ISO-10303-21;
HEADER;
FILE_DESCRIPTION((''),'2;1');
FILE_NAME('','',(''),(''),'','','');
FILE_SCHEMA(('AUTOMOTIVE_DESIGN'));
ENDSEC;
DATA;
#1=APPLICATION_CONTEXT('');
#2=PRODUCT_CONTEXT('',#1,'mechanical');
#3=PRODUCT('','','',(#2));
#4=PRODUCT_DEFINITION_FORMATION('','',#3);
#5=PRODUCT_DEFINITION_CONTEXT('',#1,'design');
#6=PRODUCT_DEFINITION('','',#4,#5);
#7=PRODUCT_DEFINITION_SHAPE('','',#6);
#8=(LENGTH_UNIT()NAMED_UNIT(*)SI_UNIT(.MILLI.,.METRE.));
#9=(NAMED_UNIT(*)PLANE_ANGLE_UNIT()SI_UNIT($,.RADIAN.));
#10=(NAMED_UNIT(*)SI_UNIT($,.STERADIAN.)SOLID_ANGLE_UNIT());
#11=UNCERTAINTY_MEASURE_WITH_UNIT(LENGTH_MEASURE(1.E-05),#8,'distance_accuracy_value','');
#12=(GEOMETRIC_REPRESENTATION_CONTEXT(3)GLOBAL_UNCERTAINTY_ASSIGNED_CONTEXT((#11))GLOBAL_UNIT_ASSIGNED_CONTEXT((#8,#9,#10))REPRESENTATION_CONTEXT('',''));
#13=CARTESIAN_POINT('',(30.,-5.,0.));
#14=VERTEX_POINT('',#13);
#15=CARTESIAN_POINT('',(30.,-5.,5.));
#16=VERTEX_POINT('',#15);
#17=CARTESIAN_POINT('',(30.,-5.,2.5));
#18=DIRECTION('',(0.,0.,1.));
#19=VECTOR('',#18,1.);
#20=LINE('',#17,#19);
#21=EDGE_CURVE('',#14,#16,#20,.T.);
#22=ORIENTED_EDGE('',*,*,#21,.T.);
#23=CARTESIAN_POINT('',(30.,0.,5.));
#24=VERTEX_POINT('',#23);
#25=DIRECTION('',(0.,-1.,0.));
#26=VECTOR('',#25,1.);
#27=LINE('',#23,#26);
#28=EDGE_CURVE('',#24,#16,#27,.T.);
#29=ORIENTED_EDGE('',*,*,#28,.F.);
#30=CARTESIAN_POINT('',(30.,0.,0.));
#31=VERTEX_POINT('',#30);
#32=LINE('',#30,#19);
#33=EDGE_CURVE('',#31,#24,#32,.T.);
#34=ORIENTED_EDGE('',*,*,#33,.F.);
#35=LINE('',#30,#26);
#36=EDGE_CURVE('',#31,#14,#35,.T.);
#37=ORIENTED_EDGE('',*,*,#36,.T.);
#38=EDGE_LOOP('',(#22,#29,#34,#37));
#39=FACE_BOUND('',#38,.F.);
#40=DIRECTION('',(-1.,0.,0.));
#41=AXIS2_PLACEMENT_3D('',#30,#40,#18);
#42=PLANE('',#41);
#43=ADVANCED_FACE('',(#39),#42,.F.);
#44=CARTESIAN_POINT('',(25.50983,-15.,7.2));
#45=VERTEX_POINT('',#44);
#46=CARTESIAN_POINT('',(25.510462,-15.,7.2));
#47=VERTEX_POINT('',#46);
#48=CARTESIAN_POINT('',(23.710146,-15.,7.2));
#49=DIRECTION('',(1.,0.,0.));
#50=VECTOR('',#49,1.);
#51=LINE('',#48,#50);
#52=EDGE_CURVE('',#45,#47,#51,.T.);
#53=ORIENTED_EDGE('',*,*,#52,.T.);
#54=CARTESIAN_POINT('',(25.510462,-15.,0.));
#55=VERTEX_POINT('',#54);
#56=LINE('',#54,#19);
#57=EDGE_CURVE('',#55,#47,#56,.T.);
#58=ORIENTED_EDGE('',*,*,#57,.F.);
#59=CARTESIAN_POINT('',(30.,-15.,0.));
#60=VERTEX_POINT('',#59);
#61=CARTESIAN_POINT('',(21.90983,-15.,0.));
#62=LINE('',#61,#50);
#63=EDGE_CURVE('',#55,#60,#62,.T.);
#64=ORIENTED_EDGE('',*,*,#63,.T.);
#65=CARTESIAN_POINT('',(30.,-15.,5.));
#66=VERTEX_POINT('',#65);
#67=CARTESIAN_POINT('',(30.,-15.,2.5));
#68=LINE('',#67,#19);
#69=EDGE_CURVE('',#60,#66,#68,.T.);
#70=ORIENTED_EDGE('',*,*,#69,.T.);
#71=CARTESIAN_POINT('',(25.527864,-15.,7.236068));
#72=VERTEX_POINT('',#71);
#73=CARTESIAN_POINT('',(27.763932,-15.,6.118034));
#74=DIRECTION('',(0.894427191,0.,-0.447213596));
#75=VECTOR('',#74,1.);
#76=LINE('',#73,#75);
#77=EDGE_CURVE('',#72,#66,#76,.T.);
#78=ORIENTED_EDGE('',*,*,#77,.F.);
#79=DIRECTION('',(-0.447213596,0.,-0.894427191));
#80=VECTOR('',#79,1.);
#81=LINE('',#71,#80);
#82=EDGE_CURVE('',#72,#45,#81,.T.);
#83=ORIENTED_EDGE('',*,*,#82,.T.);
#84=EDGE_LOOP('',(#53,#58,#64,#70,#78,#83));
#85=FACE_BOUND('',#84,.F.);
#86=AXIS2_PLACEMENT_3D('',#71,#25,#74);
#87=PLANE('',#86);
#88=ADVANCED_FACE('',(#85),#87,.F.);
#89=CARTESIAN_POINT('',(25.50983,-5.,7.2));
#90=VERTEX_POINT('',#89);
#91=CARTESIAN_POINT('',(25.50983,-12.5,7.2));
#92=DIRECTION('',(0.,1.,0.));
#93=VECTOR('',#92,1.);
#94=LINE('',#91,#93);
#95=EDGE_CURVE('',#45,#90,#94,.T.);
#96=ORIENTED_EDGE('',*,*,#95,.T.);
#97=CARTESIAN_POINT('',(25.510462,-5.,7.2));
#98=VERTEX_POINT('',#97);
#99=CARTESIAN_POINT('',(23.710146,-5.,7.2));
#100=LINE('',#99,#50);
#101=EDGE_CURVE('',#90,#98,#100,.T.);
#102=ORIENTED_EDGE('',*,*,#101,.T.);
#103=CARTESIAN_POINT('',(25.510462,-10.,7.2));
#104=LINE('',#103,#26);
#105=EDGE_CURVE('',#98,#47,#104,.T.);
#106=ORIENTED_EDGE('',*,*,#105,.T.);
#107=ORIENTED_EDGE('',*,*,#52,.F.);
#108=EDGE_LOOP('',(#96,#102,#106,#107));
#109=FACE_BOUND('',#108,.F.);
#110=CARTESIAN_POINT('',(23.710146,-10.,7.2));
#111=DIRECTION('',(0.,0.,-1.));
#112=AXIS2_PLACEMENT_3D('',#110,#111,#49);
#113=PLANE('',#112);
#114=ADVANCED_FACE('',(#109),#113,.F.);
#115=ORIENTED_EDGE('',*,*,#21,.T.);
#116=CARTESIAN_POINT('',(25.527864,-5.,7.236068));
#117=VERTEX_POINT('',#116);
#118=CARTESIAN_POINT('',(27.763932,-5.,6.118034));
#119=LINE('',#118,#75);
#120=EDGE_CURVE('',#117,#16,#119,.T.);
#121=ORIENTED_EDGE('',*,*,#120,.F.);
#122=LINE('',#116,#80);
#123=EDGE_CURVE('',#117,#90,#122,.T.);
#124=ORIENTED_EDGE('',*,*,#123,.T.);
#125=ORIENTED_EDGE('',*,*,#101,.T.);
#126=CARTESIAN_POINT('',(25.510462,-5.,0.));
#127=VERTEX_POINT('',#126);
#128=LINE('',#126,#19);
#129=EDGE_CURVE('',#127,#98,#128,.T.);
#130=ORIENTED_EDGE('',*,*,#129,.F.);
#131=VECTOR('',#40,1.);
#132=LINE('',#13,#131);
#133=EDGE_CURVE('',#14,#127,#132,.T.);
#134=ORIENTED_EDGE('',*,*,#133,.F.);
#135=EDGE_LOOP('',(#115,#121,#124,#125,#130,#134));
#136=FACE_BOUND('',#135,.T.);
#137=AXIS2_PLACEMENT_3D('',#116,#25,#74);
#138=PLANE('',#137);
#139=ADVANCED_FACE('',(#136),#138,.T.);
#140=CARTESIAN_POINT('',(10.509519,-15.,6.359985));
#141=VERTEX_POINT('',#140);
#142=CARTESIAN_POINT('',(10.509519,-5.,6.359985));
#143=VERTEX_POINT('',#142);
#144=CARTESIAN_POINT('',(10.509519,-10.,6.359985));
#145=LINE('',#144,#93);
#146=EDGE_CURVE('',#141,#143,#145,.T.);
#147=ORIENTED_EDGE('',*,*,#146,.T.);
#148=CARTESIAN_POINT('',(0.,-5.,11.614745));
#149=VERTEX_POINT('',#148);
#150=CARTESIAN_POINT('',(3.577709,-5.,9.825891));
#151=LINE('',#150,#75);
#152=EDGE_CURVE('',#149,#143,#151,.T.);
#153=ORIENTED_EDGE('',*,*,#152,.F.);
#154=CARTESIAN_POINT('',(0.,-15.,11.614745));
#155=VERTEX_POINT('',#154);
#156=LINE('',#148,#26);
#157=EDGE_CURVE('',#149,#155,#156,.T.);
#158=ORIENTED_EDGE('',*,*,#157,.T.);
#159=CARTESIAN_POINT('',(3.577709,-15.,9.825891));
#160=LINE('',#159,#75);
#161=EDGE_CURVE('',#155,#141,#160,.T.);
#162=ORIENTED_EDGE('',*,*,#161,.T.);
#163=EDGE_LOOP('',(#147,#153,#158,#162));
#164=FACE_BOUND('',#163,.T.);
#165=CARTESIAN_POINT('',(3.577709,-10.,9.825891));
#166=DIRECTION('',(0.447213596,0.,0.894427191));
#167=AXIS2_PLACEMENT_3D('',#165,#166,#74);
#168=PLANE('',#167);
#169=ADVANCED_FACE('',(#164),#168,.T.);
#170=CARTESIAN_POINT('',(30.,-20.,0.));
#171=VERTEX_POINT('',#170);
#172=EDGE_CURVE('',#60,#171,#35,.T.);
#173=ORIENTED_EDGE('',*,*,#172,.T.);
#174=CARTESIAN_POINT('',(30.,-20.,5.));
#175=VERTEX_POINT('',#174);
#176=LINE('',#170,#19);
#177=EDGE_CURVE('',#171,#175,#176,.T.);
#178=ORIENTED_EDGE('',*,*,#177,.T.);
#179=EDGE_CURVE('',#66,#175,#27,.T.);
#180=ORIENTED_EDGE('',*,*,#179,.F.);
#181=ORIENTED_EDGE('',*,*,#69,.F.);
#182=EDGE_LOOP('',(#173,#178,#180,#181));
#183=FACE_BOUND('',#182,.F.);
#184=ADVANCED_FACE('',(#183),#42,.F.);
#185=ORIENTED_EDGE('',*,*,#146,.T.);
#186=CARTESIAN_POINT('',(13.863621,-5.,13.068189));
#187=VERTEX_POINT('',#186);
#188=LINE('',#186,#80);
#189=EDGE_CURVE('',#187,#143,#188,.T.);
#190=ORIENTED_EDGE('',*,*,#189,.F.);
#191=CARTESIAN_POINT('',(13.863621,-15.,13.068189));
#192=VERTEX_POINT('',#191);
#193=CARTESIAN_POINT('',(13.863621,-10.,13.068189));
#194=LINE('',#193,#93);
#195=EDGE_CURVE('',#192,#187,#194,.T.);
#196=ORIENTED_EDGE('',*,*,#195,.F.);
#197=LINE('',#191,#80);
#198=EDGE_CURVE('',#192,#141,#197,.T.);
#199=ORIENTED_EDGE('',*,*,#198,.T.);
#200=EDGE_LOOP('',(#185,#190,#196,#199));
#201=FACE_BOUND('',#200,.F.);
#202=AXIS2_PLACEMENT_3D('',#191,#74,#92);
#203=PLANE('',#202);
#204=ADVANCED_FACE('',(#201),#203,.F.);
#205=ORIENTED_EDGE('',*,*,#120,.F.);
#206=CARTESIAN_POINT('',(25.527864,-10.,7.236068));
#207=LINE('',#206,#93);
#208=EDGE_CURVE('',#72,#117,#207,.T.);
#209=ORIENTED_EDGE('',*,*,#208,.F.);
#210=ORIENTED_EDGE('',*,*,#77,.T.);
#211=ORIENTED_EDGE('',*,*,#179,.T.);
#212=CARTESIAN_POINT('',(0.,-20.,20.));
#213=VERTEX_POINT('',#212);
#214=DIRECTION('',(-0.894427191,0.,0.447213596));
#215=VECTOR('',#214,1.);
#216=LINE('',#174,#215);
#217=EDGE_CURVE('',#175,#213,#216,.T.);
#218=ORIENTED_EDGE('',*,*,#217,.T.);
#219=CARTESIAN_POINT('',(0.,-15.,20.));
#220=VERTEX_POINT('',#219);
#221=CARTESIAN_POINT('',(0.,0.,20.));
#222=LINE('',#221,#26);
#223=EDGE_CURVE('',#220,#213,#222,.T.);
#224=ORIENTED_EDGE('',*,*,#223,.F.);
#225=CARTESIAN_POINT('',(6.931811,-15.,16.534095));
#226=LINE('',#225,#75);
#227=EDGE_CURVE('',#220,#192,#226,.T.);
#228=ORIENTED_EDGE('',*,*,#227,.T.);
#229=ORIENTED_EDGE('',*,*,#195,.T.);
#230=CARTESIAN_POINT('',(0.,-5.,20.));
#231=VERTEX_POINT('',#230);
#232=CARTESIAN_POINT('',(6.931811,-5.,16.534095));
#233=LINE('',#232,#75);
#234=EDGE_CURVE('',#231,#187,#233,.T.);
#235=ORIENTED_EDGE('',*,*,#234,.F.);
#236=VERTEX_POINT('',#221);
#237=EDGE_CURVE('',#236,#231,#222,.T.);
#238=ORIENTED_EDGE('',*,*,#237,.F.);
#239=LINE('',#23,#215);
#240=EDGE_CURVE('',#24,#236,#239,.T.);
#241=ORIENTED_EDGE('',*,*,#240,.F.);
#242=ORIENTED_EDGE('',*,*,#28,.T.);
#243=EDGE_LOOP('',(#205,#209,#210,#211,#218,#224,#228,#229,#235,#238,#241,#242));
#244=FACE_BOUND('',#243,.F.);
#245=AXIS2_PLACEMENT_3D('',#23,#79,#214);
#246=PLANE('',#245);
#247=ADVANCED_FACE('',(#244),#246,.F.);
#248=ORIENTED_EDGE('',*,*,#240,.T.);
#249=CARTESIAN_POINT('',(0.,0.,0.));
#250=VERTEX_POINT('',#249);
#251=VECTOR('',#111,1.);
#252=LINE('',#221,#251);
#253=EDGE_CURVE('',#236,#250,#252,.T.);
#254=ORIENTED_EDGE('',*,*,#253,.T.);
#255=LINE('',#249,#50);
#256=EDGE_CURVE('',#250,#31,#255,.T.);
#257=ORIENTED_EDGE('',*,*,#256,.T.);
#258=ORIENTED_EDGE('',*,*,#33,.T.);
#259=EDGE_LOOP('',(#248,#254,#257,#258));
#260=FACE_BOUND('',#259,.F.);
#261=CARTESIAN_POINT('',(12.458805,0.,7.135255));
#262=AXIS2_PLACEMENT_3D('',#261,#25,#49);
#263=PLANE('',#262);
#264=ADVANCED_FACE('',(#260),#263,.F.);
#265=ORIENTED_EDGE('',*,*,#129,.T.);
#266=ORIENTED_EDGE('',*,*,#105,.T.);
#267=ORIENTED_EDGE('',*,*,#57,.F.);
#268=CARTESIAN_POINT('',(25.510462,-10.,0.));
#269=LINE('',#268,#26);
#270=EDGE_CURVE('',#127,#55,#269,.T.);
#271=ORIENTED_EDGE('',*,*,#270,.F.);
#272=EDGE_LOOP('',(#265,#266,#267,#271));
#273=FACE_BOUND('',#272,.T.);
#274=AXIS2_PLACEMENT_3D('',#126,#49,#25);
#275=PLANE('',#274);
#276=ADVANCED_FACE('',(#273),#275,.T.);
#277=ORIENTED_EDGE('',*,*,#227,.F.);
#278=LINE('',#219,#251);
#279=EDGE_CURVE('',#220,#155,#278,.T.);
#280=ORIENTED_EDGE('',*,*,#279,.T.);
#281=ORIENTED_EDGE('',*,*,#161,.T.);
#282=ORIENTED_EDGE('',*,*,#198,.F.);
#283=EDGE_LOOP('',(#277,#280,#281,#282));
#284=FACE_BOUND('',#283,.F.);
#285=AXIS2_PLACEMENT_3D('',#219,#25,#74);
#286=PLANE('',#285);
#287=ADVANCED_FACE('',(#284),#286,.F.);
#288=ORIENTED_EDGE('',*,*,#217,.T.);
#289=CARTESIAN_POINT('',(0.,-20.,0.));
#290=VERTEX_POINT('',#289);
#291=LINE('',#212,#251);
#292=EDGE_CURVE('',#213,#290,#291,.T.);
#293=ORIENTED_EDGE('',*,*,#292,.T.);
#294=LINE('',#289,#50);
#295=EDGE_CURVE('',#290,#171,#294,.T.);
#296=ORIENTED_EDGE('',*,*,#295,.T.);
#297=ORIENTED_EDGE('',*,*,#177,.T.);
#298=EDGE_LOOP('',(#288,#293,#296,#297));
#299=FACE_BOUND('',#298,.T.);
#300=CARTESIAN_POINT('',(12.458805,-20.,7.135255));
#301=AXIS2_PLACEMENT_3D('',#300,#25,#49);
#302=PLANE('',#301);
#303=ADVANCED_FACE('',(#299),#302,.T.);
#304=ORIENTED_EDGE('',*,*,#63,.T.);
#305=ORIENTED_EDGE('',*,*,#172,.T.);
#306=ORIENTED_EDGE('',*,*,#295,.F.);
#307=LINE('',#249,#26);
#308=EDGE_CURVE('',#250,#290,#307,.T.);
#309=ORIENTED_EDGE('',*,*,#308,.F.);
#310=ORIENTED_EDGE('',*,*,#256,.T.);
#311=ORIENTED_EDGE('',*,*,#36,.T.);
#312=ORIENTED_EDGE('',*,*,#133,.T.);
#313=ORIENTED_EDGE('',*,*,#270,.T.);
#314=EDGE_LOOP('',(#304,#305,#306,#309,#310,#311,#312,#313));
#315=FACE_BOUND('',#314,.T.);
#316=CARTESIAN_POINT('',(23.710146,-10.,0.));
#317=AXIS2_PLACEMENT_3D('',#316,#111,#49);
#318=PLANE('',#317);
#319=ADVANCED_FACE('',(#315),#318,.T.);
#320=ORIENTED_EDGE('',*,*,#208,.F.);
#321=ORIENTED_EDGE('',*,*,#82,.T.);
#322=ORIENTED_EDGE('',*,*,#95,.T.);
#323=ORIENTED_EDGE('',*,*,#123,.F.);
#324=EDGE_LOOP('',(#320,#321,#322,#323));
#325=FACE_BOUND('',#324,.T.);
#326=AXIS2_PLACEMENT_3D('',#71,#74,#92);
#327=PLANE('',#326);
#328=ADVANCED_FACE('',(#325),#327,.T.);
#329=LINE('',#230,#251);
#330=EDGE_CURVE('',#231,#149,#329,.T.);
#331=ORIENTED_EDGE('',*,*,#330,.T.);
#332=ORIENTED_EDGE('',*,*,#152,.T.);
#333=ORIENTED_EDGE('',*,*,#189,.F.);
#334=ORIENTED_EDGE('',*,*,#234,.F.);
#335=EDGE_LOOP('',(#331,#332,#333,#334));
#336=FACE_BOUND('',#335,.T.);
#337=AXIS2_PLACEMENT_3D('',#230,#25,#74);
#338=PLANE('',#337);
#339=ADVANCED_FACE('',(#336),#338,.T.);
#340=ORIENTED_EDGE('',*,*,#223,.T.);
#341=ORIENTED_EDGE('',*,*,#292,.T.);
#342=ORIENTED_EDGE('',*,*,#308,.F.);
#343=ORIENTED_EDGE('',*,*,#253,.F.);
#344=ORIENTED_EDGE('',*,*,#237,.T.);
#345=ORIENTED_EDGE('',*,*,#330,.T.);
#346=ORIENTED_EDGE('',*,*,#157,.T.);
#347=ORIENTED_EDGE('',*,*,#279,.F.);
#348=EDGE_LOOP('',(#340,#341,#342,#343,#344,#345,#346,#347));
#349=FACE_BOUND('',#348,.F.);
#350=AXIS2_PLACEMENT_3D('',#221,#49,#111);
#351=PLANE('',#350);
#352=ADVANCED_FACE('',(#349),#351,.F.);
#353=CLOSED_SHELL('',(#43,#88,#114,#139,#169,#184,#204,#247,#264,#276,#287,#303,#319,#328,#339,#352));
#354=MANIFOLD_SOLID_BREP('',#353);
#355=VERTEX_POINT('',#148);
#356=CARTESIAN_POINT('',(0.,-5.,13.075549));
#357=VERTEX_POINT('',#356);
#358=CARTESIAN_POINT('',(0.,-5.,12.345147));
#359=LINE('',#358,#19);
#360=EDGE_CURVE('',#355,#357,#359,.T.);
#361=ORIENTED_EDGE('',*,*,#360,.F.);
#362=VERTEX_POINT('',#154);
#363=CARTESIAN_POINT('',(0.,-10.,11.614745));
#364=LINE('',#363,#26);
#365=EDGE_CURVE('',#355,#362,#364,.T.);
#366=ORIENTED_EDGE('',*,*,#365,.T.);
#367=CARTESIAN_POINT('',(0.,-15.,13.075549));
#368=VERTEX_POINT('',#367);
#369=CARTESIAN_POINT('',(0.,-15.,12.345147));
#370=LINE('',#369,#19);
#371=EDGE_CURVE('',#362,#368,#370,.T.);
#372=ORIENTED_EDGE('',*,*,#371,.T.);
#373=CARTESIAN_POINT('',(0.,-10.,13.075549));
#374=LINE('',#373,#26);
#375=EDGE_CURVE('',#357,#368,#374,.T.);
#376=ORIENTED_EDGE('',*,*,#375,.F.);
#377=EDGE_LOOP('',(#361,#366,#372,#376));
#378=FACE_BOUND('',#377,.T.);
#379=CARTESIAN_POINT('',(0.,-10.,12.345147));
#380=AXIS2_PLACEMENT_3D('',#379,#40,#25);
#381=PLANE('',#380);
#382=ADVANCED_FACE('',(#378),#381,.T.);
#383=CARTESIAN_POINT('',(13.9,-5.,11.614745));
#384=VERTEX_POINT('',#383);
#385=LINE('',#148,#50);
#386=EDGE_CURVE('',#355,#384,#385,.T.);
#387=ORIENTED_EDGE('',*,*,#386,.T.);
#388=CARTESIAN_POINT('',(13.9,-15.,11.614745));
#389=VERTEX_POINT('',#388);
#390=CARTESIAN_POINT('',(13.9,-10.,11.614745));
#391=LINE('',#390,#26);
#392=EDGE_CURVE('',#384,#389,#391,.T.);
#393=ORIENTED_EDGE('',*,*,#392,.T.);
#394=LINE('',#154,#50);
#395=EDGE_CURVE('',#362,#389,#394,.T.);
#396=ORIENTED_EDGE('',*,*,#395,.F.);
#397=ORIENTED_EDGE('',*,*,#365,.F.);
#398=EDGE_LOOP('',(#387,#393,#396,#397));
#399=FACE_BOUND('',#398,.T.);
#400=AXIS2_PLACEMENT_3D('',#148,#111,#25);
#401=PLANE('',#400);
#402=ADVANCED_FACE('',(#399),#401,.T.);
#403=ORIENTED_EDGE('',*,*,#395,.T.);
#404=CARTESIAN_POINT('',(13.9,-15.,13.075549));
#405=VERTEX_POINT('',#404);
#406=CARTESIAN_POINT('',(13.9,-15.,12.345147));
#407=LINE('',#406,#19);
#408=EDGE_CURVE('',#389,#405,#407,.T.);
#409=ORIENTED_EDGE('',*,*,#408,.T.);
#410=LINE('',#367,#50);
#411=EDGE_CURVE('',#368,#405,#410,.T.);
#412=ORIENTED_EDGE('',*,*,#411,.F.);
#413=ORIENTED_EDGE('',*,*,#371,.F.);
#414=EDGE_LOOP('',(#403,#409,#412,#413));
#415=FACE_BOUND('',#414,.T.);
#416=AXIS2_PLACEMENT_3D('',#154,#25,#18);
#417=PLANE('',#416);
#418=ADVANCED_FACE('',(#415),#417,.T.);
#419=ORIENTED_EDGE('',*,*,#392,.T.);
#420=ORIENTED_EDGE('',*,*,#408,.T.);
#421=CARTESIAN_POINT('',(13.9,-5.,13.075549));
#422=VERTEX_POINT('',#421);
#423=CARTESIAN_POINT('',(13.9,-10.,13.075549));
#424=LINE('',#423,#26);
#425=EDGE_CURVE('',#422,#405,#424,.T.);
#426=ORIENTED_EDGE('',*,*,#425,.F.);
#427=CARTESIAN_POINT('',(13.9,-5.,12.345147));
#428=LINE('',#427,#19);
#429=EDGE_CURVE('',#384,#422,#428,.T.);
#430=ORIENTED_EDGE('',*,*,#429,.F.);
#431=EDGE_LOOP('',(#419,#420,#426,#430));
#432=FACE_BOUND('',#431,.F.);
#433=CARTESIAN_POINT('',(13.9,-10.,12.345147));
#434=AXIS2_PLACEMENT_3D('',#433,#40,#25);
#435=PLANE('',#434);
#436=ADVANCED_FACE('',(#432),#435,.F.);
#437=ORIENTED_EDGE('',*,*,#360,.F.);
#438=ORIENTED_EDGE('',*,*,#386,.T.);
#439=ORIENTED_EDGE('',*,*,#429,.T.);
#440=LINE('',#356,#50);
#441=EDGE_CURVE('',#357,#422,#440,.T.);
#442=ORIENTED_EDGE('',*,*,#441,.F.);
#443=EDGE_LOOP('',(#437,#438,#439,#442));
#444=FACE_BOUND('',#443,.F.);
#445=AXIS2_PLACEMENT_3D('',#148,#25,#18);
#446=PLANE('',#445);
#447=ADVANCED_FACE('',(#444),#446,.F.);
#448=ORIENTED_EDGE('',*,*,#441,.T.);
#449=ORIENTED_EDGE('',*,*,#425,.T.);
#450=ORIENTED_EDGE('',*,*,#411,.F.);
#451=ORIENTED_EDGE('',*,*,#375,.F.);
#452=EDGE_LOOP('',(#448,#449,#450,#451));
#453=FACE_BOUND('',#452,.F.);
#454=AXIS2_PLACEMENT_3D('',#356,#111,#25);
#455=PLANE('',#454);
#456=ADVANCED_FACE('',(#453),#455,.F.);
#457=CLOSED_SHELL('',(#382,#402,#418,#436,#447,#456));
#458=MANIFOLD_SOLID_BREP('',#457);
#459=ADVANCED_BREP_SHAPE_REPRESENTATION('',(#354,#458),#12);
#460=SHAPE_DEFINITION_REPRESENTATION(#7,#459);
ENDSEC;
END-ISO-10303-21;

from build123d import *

# Parameters (mm, degrees)
F1_DEPTH  = 20
F2_W      = 10
F2_H      = 5
F3_DEPTH  = 5
F4_W      = 5
F4_H      = 10
F5_DEPTH  = 15
F6_W      = 15.5
F6_H      = 10
F7_DEPTH  = 7.5
F8_W      = 3.6006319447
F8_H      = 10
F9_DEPTH  = 7.2
F10_W     = 10
F10_H     = 1.4608040711
F11_DEPTH = 13.9


with BuildPart() as f1:
    # F0 (on Front) → F1 (new body)
    with BuildSketch(Plane.XZ):
        Polygon((0, 20), (0, 0), (30, 0), (30, 5), align=None)
    extrude(amount=F1_DEPTH)

    # F2 (on face) → F3 (cut)
    with BuildSketch(Plane.YZ.offset(30)):
        with Locations((-10, 2.5)):
            Rectangle(F2_W, F2_H)
    extrude(amount=-F3_DEPTH, mode=Mode.SUBTRACT)

    # F4 (on face) → F5 (cut)
    with BuildSketch(Plane(origin=(8, 0, 16), x_dir=(0.894427191, 0, -0.4472135955), z_dir=(0.4472135955, 0, 0.894427191))):
        with Locations((22.0967477525, -10)):
            Rectangle(F4_W, F4_H)
    extrude(amount=-F5_DEPTH, mode=Mode.SUBTRACT)

    # F6 (on face) → F7 (cut)
    with BuildSketch(Plane(origin=(8, 0, 16), x_dir=(0.894427191, 0, -0.4472135955), z_dir=(0.4472135955, 0, 0.894427191))):
        with Locations((-1.19427191, -10)):
            Rectangle(F6_W, F6_H)
    extrude(amount=-F7_DEPTH, mode=Mode.SUBTRACT)

    # F8 (on face) → F9 (join)
    with BuildSketch(Plane(origin=(0, 0, 0), x_dir=(1, 0, 0), z_dir=(0, 0, -1))):
        with Locations((23.7101460286, 10)):
            Rectangle(F8_W, F8_H)
    extrude(amount=-F9_DEPTH)


with BuildPart() as f11:
    # F10 (on face) → F11 (new body)
    with BuildSketch(Plane(origin=(0, 0, 0), x_dir=(0, -1, 0), z_dir=(-1, 0, 0))):
        with Locations((10, 12.3451471199)):
            Rectangle(F10_W, F10_H)
    extrude(amount=-F11_DEPTH)


solid = Compound([f1.part, f11.part])
